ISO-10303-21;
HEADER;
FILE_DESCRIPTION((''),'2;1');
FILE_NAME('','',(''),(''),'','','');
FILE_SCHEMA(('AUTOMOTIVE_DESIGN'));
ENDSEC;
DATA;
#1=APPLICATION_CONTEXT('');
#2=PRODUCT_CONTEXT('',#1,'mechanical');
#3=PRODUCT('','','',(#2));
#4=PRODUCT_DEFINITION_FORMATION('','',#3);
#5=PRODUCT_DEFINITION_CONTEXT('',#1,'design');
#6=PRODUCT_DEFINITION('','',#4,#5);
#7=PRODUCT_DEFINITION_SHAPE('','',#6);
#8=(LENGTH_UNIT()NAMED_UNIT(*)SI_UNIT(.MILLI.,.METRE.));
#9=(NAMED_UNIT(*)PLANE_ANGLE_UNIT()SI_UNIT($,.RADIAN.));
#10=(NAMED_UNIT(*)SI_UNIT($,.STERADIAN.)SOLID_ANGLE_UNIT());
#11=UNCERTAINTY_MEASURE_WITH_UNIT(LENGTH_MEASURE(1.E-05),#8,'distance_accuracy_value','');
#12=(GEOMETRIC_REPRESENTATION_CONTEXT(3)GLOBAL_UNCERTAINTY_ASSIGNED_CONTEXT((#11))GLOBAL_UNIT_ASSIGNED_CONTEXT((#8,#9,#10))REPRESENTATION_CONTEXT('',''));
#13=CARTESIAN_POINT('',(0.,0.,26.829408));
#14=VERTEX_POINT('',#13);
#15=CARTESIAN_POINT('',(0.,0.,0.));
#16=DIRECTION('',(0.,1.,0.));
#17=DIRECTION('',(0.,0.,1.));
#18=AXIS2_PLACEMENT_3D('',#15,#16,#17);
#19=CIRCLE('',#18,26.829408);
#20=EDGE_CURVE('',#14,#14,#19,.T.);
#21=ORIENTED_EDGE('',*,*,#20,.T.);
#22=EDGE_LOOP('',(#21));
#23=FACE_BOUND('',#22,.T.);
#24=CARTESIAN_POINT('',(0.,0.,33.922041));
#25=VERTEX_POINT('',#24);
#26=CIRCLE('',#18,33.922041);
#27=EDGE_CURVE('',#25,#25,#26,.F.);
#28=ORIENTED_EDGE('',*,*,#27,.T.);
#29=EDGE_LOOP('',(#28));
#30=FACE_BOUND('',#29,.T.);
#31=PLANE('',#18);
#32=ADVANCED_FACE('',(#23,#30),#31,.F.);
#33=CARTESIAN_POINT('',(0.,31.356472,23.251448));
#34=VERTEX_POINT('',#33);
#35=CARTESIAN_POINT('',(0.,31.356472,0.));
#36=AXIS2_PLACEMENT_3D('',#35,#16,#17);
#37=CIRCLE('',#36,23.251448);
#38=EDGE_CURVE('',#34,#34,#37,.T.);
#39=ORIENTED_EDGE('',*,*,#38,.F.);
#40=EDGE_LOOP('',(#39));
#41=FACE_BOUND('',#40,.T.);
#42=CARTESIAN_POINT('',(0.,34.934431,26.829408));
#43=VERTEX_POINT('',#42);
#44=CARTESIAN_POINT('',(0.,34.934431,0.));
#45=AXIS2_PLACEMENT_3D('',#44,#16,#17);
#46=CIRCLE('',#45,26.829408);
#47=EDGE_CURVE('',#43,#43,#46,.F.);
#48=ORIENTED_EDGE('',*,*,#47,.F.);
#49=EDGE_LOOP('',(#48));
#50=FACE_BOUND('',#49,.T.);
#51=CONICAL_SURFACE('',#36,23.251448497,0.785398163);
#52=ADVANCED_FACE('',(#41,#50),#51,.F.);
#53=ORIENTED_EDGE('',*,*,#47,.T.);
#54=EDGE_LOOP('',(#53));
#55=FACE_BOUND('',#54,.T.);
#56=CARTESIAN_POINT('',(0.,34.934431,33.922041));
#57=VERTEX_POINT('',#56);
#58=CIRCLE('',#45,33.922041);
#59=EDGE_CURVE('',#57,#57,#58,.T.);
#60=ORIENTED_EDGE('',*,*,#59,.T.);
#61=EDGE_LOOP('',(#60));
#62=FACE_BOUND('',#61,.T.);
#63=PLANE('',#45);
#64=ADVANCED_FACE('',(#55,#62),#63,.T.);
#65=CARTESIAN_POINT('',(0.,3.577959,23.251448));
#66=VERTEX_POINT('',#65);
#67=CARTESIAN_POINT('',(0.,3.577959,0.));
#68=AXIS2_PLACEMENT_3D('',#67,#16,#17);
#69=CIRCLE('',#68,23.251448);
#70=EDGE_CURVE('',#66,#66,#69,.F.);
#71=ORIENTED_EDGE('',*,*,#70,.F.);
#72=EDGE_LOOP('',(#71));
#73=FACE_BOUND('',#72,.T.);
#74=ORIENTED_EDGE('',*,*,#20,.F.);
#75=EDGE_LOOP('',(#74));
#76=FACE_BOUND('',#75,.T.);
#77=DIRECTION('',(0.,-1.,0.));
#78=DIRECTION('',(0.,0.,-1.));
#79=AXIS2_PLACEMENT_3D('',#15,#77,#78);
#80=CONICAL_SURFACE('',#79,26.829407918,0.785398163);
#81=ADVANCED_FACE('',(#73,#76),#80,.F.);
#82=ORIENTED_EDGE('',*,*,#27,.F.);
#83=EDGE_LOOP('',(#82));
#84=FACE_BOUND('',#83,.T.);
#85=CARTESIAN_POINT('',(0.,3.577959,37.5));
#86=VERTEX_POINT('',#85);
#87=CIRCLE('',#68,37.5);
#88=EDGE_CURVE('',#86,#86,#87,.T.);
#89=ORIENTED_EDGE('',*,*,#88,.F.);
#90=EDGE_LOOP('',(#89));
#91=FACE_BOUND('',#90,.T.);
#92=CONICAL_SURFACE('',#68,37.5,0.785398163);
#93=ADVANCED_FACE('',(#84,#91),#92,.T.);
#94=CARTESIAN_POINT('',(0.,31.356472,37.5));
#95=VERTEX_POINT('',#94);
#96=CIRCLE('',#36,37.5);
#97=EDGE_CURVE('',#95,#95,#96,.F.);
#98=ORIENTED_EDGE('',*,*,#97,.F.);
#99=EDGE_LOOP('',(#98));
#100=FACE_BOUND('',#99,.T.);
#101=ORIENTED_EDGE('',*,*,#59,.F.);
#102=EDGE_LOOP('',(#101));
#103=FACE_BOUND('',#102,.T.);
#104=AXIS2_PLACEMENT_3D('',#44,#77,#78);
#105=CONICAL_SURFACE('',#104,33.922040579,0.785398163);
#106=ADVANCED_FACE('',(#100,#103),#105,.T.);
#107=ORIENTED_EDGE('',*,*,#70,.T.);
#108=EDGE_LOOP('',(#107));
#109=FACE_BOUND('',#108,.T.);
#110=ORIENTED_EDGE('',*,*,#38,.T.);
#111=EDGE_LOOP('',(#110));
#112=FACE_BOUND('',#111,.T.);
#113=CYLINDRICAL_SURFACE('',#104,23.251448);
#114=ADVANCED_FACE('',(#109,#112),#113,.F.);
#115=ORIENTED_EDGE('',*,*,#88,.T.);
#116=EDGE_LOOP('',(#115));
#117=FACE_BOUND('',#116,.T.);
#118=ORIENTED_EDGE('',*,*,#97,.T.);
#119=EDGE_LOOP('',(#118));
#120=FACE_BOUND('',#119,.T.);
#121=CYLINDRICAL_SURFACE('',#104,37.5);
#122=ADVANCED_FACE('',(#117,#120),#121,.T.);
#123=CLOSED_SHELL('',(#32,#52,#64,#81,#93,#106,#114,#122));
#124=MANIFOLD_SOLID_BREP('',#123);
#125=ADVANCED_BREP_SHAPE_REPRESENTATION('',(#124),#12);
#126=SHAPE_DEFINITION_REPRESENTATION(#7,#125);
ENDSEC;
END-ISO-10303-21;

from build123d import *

# Parameters (mm, degrees)
SKETCH1_R           = 37.5
BOSS_EXTRUDE1_DEPTH = 34.93443132
SKETCH2_R           = 23.251448497
CUT_EXTRUDE1_DEPTH  = 64.505232002
CHAMFER1_SIZE       = 3.577959421


with BuildPart() as part:
    # Sketch1 → Boss-Extrude1 (new body)
    with BuildSketch(Plane(origin=(0, 0, 0), x_dir=(1, 0, 0), z_dir=(0, 1, 0))):
        Circle(SKETCH1_R)
    extrude(amount=BOSS_EXTRUDE1_DEPTH)

    # Sketch2 → Cut-Extrude1 (cut, through all)
    with BuildSketch(Plane(origin=(0, 0, 0), x_dir=(1, 0, 0), z_dir=(0, 1, 0))):
        Circle(SKETCH2_R)
    extrude(amount=CUT_EXTRUDE1_DEPTH, mode=Mode.SUBTRACT)

    # Chamfer1
    chamfer1_edges = [part.edges().sort_by_distance(p)[0] for p in [
        (-23.251448497, 34.93443132, 0),
        (-23.251448497, 0, 0),
        (-37.5, 0, 0),
        (-37.5, 34.93443132, 0),
    ]]
    chamfer(chamfer1_edges, length=CHAMFER1_SIZE)


solid = part.part
